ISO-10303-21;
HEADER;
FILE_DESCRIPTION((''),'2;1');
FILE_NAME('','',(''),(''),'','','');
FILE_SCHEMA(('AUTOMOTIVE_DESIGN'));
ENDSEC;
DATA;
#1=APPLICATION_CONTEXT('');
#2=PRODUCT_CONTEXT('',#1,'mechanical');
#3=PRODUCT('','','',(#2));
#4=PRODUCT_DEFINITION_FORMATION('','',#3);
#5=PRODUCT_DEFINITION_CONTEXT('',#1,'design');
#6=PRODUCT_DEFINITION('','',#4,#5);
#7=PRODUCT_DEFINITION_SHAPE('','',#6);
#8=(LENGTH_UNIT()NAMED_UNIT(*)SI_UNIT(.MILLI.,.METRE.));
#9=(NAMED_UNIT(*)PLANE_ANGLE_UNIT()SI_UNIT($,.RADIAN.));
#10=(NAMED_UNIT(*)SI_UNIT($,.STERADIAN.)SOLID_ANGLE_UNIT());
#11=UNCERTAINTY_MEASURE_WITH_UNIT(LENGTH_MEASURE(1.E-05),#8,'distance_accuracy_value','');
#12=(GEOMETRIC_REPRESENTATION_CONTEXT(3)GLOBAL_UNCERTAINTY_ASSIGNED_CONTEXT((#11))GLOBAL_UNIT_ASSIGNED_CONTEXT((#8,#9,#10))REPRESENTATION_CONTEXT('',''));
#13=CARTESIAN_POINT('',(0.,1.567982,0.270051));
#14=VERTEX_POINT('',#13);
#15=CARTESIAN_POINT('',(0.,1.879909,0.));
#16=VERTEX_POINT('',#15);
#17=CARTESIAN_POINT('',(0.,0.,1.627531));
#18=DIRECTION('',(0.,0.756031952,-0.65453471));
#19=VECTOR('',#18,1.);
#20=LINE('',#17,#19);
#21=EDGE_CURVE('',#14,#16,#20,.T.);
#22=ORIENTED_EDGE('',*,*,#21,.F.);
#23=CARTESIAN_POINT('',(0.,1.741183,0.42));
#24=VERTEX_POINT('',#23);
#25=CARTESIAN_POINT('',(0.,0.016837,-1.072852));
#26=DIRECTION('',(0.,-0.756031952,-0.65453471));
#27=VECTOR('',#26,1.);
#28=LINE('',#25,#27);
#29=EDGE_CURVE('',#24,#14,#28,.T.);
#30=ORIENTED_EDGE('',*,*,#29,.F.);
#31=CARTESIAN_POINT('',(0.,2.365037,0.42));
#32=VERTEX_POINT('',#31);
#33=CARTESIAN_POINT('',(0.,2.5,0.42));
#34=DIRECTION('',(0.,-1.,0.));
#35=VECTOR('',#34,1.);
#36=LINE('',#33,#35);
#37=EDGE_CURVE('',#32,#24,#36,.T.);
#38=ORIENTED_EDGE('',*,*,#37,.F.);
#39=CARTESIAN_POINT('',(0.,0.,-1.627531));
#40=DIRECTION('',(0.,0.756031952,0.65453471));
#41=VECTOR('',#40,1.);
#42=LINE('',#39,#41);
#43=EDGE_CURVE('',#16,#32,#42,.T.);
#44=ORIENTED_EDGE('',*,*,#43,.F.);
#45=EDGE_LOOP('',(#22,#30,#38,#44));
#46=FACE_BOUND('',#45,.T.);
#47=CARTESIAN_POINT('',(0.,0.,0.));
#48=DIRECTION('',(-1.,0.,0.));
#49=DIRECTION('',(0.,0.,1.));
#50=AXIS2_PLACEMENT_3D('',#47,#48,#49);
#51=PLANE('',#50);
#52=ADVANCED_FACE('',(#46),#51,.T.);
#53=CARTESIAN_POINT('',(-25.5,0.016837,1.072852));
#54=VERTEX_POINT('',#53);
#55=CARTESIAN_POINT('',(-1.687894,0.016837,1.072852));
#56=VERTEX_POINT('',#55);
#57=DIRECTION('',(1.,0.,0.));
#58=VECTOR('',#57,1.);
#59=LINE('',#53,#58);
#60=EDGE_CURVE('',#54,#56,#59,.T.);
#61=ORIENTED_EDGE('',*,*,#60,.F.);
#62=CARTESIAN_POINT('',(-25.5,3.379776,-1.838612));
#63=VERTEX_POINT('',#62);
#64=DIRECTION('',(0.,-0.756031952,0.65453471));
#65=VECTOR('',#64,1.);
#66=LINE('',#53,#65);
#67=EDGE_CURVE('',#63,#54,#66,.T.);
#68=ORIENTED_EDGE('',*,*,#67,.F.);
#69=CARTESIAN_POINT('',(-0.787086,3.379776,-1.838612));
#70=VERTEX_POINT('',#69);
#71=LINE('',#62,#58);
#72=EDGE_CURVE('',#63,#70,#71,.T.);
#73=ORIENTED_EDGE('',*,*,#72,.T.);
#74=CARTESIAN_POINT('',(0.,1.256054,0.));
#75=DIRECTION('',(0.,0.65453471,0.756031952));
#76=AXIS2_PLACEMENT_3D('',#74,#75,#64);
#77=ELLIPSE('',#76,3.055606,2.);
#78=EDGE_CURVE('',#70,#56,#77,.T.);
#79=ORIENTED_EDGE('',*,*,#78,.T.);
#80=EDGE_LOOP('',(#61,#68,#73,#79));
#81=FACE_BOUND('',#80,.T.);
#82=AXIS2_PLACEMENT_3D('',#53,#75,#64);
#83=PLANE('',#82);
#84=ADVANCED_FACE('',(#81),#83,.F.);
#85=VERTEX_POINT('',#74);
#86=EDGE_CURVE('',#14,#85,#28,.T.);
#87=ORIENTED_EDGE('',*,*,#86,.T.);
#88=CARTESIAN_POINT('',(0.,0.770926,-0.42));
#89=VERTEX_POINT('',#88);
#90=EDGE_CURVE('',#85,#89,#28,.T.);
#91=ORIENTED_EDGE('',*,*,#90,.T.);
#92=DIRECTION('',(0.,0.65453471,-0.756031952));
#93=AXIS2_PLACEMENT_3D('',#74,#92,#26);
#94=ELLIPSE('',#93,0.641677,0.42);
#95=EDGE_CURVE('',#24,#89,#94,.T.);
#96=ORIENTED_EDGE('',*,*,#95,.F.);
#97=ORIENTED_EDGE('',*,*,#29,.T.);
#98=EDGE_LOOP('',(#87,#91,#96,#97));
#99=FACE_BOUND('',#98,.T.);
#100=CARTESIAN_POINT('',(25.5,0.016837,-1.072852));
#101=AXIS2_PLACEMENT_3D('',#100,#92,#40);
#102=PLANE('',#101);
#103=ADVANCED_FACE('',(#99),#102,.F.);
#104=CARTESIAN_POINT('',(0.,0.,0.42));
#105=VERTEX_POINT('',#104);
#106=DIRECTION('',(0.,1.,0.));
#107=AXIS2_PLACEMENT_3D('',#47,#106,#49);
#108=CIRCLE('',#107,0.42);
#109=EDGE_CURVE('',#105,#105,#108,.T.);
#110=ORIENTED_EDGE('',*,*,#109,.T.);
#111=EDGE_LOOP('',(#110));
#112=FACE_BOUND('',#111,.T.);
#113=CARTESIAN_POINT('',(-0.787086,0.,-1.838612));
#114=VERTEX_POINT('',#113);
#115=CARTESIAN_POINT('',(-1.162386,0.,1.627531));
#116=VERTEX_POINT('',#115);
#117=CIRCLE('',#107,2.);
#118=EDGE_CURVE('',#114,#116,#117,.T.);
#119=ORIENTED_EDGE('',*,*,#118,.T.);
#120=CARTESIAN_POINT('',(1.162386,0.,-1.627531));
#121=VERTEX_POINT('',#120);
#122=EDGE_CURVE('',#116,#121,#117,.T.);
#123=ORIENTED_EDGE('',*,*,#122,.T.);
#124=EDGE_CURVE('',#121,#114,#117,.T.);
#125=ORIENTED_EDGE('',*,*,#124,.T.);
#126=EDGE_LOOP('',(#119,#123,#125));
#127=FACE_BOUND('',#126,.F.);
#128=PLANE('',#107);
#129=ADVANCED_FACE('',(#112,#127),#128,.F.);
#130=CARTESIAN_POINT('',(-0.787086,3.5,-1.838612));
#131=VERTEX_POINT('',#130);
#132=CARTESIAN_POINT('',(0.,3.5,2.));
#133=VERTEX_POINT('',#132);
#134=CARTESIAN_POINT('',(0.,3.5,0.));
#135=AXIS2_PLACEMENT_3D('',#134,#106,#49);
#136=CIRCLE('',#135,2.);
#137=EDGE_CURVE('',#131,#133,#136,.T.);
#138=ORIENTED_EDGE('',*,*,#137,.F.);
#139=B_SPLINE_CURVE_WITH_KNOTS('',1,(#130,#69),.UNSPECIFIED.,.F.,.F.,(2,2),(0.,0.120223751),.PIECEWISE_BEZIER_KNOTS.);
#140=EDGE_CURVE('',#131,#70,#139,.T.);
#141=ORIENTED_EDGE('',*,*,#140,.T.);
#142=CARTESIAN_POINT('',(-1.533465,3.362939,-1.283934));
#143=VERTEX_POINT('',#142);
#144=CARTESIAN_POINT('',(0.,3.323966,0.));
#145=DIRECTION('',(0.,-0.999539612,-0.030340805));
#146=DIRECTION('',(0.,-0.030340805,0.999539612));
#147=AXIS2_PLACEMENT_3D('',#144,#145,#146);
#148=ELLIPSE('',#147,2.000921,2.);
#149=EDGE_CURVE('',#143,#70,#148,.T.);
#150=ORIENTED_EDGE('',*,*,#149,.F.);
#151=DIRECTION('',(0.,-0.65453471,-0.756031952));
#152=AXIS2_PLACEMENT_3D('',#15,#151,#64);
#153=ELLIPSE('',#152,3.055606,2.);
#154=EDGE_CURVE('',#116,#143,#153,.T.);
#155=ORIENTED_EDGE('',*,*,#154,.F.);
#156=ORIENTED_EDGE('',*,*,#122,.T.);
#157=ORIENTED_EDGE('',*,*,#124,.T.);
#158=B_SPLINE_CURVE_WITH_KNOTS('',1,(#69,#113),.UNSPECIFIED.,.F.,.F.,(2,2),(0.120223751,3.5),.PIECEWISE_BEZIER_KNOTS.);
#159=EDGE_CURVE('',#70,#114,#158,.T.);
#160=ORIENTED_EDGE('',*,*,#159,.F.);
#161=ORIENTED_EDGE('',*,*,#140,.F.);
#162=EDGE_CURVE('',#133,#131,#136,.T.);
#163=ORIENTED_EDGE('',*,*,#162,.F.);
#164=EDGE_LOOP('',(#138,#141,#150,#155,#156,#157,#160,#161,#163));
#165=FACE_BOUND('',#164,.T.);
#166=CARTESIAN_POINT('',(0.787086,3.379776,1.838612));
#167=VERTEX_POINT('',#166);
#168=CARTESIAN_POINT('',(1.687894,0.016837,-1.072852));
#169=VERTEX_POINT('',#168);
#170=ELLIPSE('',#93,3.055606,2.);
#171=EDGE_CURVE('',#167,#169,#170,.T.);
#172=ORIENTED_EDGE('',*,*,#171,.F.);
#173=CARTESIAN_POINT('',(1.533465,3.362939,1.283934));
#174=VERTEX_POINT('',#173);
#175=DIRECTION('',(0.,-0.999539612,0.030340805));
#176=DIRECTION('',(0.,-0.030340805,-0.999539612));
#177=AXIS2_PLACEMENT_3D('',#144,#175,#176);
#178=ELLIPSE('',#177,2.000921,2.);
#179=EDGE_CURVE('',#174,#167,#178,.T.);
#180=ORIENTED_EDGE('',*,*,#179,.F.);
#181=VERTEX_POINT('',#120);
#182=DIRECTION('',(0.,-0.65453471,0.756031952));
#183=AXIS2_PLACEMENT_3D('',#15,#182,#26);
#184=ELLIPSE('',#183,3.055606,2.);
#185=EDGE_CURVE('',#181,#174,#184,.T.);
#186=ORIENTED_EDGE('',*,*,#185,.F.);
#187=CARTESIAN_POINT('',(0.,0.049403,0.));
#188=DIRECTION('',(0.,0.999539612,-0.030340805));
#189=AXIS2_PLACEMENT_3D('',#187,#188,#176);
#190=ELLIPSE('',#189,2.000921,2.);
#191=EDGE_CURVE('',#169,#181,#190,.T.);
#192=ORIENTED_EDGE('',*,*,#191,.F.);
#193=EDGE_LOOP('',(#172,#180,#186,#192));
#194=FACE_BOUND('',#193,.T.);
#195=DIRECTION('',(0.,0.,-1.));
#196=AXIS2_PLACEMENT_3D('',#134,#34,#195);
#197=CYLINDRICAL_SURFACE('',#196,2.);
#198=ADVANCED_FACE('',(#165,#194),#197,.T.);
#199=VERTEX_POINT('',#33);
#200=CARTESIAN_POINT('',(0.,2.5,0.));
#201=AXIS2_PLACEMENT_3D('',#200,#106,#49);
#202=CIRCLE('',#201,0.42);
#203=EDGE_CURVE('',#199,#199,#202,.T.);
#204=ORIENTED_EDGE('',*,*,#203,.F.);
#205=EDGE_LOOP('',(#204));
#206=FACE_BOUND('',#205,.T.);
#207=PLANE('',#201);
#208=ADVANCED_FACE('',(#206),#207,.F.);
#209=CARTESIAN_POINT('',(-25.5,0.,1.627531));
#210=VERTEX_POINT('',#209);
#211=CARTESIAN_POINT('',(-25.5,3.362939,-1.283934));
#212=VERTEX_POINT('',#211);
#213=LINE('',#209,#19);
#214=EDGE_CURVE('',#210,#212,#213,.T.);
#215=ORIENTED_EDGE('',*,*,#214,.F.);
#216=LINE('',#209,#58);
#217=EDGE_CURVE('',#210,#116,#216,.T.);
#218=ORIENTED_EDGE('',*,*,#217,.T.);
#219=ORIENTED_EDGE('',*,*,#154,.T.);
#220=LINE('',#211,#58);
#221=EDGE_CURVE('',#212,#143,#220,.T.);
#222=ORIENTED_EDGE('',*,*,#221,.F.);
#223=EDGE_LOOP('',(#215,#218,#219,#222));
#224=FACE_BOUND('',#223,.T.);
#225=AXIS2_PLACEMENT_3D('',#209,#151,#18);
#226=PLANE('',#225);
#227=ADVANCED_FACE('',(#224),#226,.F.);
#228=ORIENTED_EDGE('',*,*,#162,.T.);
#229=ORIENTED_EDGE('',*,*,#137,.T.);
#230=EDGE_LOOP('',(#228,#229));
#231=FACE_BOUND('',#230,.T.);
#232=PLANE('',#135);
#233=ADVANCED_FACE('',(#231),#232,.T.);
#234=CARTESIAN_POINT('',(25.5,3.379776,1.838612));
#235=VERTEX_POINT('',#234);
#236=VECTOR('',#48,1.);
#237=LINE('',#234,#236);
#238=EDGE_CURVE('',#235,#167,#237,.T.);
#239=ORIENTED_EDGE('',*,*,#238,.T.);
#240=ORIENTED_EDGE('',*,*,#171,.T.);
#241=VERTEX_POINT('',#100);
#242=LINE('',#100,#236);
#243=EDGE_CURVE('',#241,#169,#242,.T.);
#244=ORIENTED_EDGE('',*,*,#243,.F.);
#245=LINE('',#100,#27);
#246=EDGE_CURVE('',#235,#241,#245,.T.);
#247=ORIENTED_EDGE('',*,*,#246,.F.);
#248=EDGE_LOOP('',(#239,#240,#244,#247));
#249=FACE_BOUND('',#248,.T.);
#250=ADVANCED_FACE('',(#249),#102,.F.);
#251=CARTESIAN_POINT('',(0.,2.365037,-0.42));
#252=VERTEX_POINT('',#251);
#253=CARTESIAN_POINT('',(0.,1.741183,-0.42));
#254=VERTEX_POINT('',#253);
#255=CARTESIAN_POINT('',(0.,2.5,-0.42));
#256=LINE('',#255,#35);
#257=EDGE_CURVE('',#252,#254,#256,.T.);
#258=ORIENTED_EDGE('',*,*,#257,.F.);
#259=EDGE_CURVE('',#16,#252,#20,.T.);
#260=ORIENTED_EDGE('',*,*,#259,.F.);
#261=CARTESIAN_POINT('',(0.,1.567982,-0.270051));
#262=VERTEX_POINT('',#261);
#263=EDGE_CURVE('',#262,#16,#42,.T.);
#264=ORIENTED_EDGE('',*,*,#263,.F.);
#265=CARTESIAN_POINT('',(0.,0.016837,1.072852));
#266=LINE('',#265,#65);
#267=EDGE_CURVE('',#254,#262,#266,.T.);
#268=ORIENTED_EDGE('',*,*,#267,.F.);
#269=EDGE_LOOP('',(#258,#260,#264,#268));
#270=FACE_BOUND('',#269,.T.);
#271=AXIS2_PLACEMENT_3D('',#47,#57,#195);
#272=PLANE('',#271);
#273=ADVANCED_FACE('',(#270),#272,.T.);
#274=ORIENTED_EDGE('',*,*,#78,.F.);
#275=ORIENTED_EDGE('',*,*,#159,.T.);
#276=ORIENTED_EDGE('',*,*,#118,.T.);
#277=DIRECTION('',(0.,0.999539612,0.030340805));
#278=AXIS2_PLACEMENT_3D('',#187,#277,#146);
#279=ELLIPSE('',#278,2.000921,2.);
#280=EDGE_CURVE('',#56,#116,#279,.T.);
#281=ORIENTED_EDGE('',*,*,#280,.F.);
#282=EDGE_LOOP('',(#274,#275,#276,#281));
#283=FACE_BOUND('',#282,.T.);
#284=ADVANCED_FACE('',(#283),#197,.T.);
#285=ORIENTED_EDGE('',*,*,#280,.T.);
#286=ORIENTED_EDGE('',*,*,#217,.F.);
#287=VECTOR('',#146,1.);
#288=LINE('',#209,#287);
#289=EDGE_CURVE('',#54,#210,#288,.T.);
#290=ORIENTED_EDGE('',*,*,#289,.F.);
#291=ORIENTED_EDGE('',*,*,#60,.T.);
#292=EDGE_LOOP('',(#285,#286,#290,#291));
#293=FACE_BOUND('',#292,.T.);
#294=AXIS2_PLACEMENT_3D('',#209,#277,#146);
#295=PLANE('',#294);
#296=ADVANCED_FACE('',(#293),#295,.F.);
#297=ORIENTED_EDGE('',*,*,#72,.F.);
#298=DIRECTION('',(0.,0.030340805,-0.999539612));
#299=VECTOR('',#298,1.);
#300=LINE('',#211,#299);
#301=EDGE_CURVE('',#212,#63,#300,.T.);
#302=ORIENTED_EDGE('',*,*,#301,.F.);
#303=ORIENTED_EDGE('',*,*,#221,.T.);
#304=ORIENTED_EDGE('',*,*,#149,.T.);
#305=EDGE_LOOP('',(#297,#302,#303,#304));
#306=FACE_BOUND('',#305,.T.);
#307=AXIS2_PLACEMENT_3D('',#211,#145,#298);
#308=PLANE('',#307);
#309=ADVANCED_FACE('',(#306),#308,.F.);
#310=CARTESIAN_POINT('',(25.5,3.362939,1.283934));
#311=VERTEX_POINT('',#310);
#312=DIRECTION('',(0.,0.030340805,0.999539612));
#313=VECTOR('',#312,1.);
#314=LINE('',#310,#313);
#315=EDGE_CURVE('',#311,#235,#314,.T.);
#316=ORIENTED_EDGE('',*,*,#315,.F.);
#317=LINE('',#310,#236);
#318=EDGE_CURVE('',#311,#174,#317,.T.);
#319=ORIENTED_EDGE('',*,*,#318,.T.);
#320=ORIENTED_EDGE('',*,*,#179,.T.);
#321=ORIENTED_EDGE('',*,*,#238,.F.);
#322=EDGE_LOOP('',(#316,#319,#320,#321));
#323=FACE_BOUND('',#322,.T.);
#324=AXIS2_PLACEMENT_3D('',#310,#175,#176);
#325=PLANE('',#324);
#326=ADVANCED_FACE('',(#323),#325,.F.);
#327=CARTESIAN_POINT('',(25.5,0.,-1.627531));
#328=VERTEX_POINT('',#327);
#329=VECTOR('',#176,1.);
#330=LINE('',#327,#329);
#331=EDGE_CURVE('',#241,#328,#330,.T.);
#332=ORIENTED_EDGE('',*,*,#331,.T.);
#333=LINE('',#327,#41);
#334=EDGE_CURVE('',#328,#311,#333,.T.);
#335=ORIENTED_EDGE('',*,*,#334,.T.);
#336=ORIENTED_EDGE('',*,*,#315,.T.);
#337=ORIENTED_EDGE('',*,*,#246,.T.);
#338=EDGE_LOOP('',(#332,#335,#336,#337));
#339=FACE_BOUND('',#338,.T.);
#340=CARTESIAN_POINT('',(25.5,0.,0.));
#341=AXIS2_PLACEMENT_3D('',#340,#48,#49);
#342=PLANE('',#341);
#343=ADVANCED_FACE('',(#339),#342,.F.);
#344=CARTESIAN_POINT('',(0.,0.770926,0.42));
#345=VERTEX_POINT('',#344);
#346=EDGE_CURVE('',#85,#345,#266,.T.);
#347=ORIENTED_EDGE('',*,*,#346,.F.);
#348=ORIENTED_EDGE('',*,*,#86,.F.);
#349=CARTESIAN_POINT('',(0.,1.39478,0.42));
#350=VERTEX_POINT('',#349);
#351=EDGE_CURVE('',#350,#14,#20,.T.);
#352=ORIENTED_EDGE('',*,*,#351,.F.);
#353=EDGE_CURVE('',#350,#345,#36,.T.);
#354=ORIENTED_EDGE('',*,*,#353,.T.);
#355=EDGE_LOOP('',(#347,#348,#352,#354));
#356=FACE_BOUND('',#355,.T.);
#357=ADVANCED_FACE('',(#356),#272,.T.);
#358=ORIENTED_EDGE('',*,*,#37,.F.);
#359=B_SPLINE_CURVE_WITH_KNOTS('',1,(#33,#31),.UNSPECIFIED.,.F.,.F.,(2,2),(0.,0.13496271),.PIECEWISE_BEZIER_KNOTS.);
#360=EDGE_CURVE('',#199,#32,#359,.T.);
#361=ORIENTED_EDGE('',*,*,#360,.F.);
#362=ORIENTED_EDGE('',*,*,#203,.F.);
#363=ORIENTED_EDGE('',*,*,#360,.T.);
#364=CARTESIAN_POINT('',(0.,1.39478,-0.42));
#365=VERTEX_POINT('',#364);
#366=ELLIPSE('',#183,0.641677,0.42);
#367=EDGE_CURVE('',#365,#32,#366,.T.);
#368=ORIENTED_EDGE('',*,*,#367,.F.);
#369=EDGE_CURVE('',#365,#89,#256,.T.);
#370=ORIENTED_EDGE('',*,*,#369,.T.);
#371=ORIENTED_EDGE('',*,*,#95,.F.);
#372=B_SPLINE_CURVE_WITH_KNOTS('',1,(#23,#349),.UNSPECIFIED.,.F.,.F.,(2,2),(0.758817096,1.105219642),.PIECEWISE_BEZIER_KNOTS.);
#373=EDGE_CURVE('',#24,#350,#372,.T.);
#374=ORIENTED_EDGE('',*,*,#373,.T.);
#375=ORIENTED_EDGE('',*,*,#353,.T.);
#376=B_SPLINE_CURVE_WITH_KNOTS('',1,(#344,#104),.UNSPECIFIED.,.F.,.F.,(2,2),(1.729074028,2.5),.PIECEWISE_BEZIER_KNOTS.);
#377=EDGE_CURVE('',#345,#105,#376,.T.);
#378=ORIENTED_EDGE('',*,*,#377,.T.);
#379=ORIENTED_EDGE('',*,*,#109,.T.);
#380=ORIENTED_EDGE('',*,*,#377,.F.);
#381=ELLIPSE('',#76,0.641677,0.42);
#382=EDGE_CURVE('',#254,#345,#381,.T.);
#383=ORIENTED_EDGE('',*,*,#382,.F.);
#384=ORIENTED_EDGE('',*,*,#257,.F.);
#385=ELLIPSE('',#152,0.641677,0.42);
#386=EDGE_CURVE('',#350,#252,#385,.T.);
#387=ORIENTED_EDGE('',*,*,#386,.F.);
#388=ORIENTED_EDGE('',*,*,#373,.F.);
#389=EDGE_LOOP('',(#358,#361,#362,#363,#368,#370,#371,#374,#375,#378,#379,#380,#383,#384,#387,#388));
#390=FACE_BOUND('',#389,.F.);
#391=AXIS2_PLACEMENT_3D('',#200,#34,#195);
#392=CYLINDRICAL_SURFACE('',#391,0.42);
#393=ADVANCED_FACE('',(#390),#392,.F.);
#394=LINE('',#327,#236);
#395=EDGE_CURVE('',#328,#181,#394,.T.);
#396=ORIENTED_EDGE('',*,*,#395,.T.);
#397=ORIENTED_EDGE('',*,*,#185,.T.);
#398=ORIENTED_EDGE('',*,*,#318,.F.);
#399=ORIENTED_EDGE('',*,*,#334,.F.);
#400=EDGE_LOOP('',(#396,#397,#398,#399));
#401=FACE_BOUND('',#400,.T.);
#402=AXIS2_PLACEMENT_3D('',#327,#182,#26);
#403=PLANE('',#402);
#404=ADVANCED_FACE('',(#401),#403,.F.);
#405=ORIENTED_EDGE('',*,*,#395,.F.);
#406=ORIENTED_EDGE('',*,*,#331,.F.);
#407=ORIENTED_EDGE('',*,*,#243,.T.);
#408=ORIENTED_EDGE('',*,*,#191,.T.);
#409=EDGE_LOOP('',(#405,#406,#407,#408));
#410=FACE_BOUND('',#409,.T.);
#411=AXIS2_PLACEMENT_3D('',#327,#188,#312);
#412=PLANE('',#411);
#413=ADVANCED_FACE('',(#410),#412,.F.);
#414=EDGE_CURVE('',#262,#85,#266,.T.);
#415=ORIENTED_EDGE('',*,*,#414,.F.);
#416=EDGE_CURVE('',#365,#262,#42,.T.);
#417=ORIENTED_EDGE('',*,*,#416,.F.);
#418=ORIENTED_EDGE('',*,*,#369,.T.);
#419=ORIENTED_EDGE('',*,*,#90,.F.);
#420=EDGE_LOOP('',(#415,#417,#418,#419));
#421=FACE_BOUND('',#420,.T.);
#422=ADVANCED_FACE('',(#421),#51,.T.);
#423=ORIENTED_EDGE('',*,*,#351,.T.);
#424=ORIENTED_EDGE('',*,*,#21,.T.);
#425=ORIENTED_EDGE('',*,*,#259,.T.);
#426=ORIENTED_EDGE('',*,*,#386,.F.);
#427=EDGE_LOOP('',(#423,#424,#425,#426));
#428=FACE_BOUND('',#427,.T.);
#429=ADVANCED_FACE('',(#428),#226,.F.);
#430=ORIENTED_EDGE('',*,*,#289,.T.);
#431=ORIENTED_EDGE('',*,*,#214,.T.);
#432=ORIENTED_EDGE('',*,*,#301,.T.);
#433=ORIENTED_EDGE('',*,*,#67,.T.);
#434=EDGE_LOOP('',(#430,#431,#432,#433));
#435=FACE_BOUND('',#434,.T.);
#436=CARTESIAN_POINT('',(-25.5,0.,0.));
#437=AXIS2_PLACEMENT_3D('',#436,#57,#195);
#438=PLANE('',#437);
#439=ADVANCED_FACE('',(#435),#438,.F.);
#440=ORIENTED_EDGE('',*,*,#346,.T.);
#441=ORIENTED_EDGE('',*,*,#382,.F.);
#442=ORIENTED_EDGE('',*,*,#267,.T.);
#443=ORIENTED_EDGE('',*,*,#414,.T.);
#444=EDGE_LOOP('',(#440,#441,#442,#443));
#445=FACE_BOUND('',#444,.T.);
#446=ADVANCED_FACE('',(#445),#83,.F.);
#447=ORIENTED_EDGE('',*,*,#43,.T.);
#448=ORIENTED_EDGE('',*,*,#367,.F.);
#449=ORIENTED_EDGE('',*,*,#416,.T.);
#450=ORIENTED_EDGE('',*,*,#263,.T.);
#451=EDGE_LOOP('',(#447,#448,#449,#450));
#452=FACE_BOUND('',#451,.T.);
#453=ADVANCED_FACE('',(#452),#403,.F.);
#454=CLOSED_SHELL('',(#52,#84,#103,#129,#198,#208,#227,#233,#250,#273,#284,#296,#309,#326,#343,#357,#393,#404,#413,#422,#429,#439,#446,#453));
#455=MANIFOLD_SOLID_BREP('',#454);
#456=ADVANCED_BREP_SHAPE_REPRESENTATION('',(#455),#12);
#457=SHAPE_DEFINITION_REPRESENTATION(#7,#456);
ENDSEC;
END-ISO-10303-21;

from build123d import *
from build123d.topology import SkipClean

# Parameters (mm, degrees)
SKETCH1_R           = 2
BOSS_EXTRUDE1_DEPTH = 3.5
SKETCH2_R           = 0.42
CUT_EXTRUDE1_DEPTH  = 2.5
BOSS_EXTRUDE2_DEPTH = 25.5
BOSS_EXTRUDE3_DEPTH = 25.5


with BuildPart() as part:
    # Sketch1 → Boss-Extrude1 (new body)
    with BuildSketch(Plane(origin=(0, 0, 0), x_dir=(1, 0, 0), z_dir=(0, 1, 0))):
        Circle(SKETCH1_R)
    extrude(amount=BOSS_EXTRUDE1_DEPTH)

    # Sketch2 → Cut-Extrude1 (cut)
    with BuildSketch(Plane(origin=(0, 0, 0), x_dir=(1, 0, 0), z_dir=(0, 1, 0))):
        Circle(SKETCH2_R)
    extrude(amount=CUT_EXTRUDE1_DEPTH, mode=Mode.SUBTRACT)

    # Sketch3 → Boss-Extrude2 (add)
    with SkipClean():  # the faces are left unmerged after this step: merging them gives an invalid solid
        with BuildSketch(Plane(origin=(0, 0, 0), x_dir=(0, 0, -1), z_dir=(1, 0, 0))):
            Polygon((1.627531183, 0), (-1.283933552, 3.362939097), (-1.838612291, 3.379776249), (1.072852444, 0.016837151), align=None)
        extrude(amount=BOSS_EXTRUDE2_DEPTH)

    # Sketch4 → Boss-Extrude3 (add)
    with SkipClean():  # the faces are left unmerged after this step: merging them gives an invalid solid
        with BuildSketch(Plane.ZY):
            Polygon((1.627531183, 0), (-1.283933552, 3.362939097), (-1.838612291, 3.379776249), (1.072852444, 0.016837151), align=None)
        extrude(amount=BOSS_EXTRUDE3_DEPTH)


solid = part.part
